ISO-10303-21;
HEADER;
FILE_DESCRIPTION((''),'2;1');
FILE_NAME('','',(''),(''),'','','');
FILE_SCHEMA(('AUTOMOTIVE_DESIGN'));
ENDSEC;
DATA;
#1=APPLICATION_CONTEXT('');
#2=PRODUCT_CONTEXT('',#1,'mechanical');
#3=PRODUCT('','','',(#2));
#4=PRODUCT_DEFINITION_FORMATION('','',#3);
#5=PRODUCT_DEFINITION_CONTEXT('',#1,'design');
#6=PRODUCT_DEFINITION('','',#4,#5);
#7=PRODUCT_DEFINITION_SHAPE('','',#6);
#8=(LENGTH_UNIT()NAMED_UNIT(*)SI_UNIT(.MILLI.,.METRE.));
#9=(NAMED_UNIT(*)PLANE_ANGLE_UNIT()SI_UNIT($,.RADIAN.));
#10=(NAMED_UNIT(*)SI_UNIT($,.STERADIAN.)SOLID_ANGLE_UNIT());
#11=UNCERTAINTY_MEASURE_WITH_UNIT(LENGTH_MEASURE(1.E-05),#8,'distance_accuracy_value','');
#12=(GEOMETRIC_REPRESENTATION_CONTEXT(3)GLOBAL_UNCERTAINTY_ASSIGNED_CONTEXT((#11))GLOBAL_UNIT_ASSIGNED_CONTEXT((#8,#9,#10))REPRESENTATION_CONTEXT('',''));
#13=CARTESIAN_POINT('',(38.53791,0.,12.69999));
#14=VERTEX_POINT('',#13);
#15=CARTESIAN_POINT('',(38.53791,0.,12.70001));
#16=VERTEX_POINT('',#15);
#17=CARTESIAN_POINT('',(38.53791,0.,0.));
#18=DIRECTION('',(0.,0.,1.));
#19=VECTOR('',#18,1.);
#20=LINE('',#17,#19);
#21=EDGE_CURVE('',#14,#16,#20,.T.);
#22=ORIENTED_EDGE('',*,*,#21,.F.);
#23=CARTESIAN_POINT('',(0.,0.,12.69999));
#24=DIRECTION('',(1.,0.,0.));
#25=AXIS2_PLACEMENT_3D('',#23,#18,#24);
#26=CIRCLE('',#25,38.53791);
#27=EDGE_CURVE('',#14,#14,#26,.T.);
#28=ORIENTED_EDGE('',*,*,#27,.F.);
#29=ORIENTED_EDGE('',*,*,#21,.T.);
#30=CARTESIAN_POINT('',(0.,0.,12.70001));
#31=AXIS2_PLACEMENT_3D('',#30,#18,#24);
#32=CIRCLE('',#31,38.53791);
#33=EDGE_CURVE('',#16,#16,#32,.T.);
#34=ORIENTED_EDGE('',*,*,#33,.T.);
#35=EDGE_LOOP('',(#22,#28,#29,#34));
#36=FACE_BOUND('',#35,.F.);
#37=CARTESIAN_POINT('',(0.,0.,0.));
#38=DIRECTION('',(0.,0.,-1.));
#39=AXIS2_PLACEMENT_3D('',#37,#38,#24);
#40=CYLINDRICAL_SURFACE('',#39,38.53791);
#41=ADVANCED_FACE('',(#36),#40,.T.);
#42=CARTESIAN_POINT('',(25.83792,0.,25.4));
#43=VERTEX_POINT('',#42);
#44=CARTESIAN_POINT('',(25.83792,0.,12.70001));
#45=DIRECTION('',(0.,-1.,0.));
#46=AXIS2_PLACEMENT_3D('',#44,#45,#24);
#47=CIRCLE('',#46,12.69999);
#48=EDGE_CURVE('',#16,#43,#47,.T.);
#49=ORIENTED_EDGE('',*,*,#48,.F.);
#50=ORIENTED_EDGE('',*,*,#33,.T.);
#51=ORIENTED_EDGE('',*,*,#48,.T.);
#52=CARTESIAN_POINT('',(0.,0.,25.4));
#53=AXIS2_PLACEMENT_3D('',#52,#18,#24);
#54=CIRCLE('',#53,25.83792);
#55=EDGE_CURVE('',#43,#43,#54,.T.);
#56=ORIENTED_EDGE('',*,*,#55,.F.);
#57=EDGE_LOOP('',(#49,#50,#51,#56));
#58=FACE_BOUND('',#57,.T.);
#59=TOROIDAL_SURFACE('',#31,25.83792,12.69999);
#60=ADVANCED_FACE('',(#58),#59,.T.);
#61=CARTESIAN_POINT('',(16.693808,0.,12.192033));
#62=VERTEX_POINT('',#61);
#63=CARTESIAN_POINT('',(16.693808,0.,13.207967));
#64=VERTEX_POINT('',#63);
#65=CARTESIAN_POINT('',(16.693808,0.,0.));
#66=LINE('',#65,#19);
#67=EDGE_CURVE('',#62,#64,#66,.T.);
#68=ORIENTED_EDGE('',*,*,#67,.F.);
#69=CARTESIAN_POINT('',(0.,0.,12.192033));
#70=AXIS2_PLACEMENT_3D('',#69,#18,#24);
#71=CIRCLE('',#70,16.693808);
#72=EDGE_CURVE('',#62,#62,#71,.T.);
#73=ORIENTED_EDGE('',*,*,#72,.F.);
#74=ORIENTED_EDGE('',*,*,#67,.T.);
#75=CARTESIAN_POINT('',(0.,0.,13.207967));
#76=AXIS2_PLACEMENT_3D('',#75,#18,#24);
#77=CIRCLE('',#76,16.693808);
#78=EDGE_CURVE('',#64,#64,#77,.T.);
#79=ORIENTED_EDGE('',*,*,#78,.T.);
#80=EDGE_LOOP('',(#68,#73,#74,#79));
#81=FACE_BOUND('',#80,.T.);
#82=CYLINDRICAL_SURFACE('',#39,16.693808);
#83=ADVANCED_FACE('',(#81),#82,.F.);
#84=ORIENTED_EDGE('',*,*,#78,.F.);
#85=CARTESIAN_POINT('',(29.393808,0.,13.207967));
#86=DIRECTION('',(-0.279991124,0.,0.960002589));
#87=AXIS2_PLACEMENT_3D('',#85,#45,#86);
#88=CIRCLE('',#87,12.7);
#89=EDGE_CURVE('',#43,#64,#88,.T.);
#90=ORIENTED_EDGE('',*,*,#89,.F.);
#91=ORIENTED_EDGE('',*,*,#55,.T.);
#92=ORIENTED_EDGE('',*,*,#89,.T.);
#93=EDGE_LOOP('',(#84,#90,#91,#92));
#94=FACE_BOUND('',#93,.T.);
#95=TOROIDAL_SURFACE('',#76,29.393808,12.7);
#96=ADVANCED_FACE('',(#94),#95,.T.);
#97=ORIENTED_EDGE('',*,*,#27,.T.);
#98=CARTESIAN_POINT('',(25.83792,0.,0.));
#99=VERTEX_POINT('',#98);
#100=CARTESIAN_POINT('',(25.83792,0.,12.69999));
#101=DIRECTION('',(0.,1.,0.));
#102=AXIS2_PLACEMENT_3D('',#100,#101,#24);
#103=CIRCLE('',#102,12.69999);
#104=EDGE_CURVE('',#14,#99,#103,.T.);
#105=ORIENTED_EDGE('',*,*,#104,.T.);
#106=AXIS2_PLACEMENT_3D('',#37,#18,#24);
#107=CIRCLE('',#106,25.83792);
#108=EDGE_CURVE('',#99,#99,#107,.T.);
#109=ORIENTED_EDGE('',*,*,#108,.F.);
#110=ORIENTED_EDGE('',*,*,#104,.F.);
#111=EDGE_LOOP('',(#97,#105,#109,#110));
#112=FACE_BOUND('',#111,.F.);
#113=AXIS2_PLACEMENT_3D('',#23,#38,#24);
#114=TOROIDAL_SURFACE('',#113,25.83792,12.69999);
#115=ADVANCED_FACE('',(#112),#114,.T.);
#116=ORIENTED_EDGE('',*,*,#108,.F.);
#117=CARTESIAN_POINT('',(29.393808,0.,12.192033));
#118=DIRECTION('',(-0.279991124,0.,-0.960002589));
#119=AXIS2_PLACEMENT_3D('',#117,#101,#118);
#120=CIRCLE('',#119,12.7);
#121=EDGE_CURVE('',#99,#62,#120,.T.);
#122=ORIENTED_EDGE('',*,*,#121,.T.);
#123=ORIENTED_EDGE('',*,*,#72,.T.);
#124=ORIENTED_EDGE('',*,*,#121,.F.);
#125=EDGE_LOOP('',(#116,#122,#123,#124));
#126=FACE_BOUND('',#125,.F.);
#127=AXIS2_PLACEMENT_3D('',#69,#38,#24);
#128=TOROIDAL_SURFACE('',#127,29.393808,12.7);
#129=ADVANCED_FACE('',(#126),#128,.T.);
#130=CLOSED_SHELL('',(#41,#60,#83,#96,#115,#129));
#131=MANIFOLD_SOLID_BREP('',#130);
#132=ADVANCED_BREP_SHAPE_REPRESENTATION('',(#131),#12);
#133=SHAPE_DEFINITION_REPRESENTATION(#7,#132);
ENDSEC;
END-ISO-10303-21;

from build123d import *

# Parameters (mm, degrees)
F0_R     = 38.5379103623
F0_R_2   = 16.6938076384
F1_DEPTH = 25.4
F2_R     = 12.69999


# Not quite as in the source:
# - a fillet or chamfer that OpenCascade refuses, or shapes differently, is made with other operations: its cross-section is extruded or revolved along the edge and cut away or added
# - a fillet or chamfer is up to 0.001 mm smaller than in the source, because OpenCascade refuses the exact size


with BuildPart() as f1:
    # F0 (on Top) → F1 (new body)
    with BuildSketch(Plane.XY):
        Circle(F0_R)
        Circle(F0_R_2, mode=Mode.SUBTRACT)
    extrude(amount=F1_DEPTH)

    # F2 (radius 12.7 in the source; OpenCascade refuses exactly that, so slightly less here)
    f2_edges = [f1.edges().sort_by_distance(p)[0] for p in [
        (-38.53791, 0, 25.4),
        (-38.53791, 0, 0),
    ]]
    fillet(f2_edges, radius=F2_R)

    # F3: fillet of radius 12.7 on 2 edges, made by hand

    # F3_s1 → F3_t2 (revolve, cut)
    with BuildSketch(Plane.XZ):
        with BuildLine():
            ThreePointArc((25.8379203623, 25.4), (19.2338428647, 20.8280140909), (16.6938076384, 13.2079671228))
            Line((16.6938076384, 13.2079671228), (16.6938076384, 25.4))
            Line((16.6938076384, 25.4), (25.8379203623, 25.4))
        make_face()
    revolve(axis=Axis((0, 0, 25.4), (0, 0, 1)), mode=Mode.SUBTRACT)

    # F3_s3 → F3_t4 (revolve, cut)
    with BuildSketch(Plane.XZ):
        with BuildLine():
            ThreePointArc((25.8379203623, 0), (19.2338428647, 4.5719859091), (16.6938076384, 12.1920328772))
            Line((16.6938076384, 12.1920328772), (16.6938076384, 0))
            Line((16.6938076384, 0), (25.8379203623, 0))
        make_face()
    revolve(axis=Axis((0, 0, 0), (0, 0, 1)), mode=Mode.SUBTRACT)


solid = f1.part
